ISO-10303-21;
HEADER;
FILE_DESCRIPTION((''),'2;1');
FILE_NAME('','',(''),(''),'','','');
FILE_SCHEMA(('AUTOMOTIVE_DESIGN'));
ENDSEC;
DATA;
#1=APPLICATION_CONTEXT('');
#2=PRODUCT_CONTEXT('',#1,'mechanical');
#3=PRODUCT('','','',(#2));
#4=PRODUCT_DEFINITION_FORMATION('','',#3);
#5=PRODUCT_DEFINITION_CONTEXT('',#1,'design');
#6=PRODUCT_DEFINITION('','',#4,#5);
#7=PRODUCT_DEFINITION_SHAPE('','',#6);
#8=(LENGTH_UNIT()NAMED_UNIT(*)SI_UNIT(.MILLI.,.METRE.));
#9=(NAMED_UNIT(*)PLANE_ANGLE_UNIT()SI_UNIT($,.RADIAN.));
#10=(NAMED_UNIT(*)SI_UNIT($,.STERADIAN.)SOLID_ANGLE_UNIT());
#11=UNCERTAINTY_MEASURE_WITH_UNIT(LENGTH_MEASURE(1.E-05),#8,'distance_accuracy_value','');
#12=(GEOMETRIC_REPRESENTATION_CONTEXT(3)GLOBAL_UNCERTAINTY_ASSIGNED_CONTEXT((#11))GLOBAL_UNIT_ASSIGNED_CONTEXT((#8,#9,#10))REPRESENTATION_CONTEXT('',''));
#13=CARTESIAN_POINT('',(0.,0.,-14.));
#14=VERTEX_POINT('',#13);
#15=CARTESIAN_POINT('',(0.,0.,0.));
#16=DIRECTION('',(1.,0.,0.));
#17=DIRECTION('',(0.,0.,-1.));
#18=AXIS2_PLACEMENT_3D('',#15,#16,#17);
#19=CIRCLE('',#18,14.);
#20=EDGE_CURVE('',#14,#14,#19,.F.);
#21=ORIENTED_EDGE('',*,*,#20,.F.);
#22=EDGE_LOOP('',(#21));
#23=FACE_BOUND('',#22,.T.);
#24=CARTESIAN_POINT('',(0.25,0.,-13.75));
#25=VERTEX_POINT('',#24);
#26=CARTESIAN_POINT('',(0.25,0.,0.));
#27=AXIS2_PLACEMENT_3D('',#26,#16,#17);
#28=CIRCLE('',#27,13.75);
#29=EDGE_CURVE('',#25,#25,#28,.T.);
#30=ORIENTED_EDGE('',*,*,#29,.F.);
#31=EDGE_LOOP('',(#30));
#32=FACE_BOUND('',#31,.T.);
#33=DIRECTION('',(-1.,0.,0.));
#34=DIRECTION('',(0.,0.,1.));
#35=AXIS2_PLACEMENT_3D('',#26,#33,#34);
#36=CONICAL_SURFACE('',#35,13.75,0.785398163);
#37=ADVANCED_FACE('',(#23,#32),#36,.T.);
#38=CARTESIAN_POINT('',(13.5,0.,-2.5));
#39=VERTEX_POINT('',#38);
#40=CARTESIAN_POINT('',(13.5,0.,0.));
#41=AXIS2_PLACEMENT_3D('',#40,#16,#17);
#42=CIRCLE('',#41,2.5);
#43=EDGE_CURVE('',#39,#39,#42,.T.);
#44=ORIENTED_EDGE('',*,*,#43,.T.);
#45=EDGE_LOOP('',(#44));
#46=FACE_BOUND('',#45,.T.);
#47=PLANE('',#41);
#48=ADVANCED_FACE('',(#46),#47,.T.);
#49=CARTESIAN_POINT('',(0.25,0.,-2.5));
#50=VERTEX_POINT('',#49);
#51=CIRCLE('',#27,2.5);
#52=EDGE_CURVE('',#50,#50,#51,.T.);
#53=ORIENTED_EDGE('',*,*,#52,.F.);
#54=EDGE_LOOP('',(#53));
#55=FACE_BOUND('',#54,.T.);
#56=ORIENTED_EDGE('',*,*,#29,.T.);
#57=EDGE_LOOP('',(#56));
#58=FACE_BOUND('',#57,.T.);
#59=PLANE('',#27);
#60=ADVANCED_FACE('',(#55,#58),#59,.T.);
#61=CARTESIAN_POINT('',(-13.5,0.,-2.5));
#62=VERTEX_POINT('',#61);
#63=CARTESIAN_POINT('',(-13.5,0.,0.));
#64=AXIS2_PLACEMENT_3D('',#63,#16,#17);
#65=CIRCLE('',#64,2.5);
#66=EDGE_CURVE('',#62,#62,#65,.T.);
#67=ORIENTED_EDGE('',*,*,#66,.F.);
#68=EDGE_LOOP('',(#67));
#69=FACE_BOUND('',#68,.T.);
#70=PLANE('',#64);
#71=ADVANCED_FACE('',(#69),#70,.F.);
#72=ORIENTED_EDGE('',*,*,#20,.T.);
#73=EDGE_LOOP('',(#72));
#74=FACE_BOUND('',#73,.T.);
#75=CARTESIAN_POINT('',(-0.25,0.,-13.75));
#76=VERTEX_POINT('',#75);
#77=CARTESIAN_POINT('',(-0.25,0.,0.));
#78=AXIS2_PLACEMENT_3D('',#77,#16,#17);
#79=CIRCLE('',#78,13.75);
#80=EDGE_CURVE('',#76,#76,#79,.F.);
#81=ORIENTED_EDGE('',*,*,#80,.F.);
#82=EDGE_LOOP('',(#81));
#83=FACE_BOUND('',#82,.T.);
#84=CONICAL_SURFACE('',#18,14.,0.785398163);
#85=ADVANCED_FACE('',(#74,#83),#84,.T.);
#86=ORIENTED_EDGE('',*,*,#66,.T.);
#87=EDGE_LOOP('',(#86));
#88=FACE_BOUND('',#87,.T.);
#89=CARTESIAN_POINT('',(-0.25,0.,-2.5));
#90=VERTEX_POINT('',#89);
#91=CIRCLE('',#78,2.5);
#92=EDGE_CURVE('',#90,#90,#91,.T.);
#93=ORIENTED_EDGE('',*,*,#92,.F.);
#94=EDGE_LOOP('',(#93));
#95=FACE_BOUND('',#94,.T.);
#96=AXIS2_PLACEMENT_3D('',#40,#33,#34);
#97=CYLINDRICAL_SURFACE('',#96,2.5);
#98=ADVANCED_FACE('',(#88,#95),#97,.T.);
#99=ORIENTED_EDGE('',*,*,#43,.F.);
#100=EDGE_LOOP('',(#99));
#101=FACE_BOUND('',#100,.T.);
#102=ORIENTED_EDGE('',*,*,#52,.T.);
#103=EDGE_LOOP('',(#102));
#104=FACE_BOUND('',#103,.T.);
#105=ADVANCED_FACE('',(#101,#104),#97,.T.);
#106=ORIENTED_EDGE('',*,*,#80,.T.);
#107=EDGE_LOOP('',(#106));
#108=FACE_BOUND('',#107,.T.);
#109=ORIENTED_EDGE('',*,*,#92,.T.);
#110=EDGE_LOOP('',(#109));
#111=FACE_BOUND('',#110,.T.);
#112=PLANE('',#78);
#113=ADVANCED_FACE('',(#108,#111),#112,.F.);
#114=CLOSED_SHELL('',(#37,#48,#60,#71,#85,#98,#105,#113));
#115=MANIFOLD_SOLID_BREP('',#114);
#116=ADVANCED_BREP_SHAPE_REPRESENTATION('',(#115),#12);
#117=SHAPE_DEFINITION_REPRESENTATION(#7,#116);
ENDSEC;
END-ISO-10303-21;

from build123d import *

# Parameters (mm, degrees)
SKETCH1_R           = 2.5
BOSS_EXTRUDE3_DEPTH = 13.5
SKETCH2_R           = 14
BOSS_EXTRUDE4_DEPTH = 0.25
CHAMFER1_SIZE       = 0.25


with BuildPart() as part:
    # Sketch1 → Boss-Extrude3 (new, symmetric)
    with BuildSketch(Plane(origin=(0, 0, 0), x_dir=(0, 0, -1), z_dir=(1, 0, 0))):
        Circle(SKETCH1_R)
    extrude(amount=BOSS_EXTRUDE3_DEPTH, both=True)

    # Sketch2 → Boss-Extrude4 (add, symmetric)
    with BuildSketch(Plane(origin=(0, 0, 0), x_dir=(0, 0, -1), z_dir=(1, 0, 0))):
        Circle(SKETCH2_R)
    extrude(amount=BOSS_EXTRUDE4_DEPTH, both=True)

    # Chamfer1
    chamfer1_edges = [part.edges().sort_by_distance(p)[0] for p in [
        (-0.25, 0, 14),
        (0.25, 0, 14),
    ]]
    chamfer(chamfer1_edges, length=CHAMFER1_SIZE - 0.0001)  # a hair under: the kernel refuses the full size


solid = part.part
